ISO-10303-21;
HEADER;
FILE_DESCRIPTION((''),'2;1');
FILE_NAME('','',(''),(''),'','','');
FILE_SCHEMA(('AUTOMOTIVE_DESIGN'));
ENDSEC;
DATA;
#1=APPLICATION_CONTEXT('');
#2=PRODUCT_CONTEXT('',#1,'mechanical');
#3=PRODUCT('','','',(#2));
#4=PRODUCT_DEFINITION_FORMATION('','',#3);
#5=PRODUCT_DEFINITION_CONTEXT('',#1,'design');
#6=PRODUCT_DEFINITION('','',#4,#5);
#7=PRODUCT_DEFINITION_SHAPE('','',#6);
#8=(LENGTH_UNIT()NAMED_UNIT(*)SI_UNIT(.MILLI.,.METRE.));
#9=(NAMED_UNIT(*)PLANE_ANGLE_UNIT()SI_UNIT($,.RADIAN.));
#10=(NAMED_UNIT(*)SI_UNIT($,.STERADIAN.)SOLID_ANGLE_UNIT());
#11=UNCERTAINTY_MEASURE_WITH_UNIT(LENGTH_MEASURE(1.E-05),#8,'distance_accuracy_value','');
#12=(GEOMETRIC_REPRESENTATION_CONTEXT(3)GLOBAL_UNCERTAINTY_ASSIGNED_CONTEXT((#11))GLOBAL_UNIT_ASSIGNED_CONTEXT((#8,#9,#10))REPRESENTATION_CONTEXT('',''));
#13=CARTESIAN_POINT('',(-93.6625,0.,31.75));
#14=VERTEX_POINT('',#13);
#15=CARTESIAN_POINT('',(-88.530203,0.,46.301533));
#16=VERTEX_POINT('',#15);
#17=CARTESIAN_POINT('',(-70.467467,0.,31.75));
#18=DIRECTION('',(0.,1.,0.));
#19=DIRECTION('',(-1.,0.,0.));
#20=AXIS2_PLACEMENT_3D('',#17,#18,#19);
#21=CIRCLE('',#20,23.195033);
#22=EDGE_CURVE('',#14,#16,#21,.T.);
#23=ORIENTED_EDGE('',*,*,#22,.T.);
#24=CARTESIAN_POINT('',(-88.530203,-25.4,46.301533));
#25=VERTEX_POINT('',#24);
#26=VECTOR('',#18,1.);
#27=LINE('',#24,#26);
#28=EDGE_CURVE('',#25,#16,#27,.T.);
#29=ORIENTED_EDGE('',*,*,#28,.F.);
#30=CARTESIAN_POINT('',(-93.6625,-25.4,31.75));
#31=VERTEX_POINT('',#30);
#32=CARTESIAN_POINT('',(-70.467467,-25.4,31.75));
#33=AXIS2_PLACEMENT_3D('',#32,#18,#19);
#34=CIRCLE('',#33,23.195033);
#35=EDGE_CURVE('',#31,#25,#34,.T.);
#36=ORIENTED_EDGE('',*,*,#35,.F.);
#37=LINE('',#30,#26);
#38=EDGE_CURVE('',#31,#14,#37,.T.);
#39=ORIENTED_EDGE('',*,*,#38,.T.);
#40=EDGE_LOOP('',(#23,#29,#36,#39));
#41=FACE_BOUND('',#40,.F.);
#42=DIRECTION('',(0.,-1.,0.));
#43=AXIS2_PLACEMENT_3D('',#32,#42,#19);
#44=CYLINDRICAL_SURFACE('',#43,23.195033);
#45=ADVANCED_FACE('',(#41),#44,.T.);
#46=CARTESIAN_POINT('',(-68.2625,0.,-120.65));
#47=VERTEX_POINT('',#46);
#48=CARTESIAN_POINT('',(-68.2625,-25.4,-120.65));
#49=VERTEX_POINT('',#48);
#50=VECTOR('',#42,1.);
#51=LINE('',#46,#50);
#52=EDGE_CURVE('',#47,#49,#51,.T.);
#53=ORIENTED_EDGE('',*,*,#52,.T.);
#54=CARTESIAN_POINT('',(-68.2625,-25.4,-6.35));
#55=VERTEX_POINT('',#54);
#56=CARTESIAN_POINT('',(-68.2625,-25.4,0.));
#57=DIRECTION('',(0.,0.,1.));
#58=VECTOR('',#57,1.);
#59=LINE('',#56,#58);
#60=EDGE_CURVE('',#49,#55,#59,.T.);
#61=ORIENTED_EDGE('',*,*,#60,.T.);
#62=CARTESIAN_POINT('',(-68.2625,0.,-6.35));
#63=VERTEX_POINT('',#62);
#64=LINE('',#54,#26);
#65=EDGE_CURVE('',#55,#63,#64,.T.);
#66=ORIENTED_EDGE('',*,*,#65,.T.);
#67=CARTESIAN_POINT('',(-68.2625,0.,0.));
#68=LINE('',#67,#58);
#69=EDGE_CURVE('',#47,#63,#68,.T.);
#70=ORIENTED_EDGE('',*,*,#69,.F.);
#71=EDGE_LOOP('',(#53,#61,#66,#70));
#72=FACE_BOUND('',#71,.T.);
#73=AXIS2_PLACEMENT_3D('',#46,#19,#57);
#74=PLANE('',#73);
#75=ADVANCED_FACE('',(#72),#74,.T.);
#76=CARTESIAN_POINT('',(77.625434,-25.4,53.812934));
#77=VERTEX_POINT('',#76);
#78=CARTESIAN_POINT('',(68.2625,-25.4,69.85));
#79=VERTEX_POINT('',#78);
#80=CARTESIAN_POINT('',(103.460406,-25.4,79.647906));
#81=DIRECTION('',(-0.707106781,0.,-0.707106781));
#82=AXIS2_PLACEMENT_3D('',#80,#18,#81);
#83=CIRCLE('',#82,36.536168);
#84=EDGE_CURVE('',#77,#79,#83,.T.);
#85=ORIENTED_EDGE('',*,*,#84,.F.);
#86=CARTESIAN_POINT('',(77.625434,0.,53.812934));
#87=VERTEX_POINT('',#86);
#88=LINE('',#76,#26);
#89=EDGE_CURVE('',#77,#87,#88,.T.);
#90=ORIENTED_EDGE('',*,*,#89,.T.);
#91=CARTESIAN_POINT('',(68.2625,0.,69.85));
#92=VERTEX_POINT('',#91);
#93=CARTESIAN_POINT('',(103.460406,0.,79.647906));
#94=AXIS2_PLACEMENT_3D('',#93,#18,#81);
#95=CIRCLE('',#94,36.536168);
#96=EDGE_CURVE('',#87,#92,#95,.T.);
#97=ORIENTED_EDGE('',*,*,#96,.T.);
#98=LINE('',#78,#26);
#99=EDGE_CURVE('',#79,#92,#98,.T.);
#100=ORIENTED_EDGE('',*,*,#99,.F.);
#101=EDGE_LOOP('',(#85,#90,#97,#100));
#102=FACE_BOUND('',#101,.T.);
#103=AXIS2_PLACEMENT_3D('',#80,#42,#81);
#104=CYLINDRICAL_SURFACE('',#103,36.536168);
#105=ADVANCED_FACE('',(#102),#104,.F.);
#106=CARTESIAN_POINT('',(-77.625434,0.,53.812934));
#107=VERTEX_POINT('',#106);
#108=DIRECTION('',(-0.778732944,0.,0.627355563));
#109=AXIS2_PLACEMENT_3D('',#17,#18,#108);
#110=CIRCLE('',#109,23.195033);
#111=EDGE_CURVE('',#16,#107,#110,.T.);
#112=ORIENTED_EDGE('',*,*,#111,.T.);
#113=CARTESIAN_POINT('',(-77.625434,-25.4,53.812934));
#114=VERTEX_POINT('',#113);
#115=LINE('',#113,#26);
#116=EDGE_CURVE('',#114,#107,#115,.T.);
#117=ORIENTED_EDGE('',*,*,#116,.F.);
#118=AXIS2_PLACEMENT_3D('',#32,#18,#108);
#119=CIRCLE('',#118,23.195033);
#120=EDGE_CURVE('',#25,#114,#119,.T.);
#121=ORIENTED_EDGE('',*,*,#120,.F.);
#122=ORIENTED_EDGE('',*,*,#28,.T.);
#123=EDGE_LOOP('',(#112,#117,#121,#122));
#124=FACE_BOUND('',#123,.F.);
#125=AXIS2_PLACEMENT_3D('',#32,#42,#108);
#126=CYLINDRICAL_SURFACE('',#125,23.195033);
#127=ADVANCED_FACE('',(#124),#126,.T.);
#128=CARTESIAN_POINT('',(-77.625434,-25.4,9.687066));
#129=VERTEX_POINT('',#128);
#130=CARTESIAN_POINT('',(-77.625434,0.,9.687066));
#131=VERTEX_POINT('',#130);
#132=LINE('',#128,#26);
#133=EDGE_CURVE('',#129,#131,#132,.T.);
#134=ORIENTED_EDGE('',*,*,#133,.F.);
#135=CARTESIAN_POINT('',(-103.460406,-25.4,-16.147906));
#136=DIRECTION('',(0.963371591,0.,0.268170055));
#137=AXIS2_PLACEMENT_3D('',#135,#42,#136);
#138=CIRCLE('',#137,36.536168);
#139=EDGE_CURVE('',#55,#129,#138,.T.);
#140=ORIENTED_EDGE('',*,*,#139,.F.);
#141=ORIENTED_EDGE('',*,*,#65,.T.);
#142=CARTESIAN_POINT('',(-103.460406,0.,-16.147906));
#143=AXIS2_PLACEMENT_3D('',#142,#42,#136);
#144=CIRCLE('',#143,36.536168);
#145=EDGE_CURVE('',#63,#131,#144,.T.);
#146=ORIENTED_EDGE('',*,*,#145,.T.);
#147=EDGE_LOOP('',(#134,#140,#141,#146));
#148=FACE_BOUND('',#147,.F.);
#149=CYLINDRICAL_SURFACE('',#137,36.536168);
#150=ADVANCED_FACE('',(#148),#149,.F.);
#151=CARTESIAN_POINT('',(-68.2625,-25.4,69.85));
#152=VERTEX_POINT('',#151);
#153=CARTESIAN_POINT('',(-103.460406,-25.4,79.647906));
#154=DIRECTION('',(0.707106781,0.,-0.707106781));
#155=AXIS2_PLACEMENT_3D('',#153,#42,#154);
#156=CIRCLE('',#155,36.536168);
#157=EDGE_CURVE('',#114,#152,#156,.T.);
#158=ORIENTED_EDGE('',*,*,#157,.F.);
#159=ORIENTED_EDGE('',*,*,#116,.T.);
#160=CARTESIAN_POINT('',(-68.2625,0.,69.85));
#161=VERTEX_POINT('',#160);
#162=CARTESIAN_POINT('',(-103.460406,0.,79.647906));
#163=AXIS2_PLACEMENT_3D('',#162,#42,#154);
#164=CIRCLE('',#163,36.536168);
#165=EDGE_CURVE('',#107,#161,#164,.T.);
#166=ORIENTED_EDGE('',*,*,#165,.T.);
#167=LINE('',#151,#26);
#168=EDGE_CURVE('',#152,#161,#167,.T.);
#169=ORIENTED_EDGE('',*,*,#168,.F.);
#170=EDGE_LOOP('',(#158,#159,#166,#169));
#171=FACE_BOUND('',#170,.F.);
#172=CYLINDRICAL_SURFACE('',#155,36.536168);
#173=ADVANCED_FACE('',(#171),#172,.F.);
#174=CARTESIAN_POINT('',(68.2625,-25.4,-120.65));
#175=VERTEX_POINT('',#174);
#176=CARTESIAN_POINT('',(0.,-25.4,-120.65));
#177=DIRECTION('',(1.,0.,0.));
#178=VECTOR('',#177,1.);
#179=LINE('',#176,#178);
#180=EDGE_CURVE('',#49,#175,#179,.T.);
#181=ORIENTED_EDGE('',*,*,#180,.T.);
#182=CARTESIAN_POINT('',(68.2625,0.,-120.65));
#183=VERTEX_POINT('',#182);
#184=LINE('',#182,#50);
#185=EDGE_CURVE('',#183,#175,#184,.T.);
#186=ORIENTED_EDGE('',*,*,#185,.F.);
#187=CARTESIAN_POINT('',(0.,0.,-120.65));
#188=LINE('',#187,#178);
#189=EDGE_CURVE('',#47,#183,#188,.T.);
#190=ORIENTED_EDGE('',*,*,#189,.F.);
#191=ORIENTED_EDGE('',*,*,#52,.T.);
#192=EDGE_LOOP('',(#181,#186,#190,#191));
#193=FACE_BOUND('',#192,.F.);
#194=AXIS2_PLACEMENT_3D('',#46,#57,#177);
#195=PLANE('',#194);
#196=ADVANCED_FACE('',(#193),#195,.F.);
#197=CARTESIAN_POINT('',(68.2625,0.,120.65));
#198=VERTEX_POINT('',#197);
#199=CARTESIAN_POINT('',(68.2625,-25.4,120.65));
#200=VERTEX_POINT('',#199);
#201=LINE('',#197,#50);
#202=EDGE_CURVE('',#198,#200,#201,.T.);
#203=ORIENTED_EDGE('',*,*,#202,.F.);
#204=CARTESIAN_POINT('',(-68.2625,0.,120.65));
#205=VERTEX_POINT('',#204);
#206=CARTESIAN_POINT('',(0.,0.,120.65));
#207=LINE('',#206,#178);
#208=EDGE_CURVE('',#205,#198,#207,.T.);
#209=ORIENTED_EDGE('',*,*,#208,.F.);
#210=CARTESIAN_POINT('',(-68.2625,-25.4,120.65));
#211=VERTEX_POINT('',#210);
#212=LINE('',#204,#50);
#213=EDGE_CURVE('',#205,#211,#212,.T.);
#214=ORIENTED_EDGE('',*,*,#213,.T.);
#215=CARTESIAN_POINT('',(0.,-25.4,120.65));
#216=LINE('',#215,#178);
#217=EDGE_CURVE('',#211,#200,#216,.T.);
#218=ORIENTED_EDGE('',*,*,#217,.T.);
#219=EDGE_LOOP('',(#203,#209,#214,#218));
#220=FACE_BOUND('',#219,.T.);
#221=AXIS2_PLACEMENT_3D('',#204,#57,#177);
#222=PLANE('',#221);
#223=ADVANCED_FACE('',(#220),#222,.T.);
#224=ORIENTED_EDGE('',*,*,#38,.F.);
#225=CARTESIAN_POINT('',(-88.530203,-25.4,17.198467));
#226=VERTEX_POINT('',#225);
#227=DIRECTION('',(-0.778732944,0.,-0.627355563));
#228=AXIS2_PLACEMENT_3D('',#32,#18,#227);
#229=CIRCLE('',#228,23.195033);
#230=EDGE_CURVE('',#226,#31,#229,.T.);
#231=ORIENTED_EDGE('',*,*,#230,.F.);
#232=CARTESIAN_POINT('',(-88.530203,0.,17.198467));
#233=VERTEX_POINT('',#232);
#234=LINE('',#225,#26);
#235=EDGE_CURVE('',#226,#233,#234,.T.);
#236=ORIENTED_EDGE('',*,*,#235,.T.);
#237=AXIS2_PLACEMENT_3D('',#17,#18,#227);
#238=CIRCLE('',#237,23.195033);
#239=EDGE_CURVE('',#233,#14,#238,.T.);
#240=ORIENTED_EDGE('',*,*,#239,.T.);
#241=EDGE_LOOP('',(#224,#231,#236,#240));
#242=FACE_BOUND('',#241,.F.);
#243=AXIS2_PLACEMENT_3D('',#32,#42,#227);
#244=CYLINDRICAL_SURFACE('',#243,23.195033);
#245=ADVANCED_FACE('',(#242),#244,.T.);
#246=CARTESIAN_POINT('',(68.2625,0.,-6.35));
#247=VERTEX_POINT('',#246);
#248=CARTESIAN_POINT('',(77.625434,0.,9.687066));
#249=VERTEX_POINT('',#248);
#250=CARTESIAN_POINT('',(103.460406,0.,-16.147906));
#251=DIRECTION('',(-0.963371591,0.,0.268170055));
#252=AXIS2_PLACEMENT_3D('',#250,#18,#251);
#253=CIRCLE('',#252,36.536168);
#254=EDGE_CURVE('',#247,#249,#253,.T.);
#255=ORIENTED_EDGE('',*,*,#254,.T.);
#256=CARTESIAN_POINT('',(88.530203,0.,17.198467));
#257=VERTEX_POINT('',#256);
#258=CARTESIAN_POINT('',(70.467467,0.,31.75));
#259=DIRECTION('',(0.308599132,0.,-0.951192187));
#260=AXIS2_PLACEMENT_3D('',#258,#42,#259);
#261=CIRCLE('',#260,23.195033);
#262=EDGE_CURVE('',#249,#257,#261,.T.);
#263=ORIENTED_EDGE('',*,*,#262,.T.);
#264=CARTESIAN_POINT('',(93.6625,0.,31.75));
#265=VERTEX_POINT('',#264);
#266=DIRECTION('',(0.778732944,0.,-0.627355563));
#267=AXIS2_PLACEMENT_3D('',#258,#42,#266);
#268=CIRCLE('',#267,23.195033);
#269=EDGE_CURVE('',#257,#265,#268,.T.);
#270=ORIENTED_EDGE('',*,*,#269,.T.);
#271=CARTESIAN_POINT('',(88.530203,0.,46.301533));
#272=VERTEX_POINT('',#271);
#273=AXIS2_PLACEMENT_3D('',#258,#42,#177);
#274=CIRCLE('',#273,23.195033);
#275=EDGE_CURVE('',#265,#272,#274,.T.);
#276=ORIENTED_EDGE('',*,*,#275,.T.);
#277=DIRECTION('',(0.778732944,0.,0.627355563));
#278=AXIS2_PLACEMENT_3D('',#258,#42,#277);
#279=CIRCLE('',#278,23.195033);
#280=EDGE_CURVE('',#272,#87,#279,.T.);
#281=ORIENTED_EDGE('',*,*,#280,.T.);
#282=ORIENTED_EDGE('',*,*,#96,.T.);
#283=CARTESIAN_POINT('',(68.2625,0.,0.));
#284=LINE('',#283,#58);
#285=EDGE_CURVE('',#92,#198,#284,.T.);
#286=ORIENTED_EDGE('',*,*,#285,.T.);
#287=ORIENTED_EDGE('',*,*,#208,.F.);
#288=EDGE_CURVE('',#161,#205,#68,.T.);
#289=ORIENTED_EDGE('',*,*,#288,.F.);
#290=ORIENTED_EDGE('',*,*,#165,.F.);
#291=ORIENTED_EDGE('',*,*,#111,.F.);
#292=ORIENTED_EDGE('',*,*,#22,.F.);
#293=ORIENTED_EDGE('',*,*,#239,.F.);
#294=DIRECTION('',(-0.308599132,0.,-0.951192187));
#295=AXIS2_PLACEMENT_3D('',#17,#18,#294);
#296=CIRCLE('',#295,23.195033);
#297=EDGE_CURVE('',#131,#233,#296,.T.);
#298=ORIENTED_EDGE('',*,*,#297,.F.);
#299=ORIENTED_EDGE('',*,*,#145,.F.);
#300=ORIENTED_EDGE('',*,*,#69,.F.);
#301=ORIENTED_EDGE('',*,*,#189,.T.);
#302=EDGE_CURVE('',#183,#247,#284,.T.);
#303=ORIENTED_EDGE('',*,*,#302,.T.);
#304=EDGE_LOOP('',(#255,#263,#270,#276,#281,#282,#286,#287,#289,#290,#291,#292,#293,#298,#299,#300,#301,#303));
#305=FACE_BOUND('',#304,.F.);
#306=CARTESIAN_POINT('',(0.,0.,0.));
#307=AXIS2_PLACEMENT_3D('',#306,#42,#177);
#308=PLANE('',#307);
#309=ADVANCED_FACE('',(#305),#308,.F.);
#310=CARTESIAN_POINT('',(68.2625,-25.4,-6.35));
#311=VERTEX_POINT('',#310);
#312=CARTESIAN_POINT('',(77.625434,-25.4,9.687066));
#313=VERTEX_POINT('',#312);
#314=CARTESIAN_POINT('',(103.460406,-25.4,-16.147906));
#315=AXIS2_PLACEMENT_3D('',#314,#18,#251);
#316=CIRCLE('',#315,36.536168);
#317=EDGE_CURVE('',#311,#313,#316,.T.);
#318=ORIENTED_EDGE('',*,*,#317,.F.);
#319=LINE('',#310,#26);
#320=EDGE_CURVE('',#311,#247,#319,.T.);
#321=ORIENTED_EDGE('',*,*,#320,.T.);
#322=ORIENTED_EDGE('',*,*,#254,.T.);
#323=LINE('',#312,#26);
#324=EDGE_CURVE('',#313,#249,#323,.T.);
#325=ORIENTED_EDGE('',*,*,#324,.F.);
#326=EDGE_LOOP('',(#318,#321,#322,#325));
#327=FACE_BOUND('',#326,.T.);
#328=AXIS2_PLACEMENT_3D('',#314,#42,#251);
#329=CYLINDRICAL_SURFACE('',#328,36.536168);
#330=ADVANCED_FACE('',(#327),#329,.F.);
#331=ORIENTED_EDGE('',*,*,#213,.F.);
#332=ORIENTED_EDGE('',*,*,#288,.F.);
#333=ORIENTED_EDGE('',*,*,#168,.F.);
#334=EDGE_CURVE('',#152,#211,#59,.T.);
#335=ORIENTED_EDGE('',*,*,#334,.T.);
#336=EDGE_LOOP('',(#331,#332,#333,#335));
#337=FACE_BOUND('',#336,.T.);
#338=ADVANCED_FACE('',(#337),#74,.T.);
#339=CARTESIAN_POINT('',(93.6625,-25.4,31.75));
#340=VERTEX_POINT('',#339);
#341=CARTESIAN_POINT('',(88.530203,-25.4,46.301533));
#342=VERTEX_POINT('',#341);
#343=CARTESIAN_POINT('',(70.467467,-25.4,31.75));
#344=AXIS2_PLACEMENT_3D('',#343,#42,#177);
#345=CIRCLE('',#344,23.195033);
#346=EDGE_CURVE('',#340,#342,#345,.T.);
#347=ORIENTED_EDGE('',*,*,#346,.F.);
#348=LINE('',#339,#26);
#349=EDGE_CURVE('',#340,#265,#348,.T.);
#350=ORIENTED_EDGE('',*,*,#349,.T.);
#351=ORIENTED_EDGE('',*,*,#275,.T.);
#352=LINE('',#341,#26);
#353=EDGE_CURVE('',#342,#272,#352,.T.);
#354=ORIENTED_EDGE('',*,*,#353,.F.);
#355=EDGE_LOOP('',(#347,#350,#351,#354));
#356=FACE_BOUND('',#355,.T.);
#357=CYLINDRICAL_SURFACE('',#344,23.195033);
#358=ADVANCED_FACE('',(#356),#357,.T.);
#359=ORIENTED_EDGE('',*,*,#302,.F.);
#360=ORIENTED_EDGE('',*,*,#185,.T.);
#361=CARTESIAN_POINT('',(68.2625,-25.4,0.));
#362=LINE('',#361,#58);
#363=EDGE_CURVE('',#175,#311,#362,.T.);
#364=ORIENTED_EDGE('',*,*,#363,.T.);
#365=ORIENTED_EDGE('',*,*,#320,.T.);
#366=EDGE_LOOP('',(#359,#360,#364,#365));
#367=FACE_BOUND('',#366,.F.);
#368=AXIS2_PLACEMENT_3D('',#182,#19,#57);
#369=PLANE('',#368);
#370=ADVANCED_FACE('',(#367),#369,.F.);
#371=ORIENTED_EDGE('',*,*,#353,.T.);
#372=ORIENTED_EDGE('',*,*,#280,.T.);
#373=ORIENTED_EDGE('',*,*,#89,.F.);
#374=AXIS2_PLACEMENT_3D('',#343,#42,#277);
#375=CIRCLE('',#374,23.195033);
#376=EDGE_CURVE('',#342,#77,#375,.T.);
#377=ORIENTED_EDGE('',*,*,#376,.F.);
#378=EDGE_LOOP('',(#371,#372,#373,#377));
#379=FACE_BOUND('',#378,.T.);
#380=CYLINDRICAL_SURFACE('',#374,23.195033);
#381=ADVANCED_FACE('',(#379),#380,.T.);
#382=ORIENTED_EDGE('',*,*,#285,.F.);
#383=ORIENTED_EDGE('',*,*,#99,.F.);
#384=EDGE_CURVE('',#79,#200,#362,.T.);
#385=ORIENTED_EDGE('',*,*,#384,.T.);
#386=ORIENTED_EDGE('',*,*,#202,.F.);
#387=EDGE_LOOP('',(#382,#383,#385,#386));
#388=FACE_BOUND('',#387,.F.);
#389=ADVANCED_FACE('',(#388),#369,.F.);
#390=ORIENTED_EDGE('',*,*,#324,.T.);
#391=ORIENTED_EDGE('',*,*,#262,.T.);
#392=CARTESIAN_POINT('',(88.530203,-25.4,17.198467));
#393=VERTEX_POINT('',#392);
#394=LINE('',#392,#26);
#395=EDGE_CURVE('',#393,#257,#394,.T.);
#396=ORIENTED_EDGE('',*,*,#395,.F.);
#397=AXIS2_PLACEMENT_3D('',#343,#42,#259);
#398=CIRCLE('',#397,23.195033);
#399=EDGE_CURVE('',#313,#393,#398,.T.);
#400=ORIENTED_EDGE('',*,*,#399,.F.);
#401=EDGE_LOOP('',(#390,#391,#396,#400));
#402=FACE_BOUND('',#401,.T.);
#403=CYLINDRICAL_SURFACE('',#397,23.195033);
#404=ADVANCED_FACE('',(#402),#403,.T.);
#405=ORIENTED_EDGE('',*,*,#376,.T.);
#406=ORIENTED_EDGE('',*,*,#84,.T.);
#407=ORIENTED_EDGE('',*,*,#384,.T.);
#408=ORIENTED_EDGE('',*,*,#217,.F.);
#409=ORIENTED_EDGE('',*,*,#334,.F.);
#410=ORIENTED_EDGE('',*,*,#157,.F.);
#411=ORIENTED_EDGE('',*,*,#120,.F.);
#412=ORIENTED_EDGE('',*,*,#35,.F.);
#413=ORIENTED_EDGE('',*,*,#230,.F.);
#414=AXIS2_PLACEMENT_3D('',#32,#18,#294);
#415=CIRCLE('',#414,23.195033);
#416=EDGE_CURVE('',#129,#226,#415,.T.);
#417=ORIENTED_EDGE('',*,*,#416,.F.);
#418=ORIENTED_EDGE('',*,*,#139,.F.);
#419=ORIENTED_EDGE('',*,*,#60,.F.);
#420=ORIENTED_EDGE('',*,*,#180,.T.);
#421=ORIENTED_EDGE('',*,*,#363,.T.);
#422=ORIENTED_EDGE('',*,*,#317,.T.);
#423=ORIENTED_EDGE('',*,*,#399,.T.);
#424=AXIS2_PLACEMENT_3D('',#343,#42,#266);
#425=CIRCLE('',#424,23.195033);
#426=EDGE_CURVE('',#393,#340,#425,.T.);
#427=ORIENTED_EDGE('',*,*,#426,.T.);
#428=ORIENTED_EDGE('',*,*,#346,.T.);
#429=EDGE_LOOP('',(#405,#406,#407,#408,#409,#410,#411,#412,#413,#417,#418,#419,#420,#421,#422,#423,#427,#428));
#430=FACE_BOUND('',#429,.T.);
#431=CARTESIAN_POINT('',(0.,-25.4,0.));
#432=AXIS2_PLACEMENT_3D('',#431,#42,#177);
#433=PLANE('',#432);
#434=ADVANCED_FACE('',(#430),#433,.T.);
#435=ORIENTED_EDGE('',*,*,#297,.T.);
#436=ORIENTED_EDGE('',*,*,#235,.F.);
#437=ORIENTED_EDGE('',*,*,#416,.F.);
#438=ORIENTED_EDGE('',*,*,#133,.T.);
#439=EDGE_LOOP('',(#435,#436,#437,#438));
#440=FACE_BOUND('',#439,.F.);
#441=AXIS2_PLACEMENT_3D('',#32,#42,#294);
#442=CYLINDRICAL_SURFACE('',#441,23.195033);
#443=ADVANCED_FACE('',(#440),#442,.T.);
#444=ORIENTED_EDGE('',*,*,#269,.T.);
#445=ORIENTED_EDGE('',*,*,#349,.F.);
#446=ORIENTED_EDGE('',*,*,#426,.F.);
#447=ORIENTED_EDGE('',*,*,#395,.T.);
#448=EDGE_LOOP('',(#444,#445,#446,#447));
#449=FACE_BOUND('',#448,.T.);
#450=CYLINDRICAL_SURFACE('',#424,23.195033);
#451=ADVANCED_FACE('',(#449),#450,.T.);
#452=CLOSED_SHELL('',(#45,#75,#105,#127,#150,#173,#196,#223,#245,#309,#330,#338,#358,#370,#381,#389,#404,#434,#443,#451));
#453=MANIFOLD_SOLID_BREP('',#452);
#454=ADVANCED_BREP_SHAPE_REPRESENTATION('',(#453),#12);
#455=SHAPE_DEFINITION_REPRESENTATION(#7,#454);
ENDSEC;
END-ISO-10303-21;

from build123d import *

# Parameters (mm, degrees)
F0_W     = 136.525
F0_H     = 241.3
F1_DEPTH = 25.4
F3_DEPTH = 25.4


with BuildPart() as f1:
    # F0 (on Front) → F1 (new body)
    with BuildSketch(Plane.XZ):
        Rectangle(F0_W, F0_H)
    extrude(amount=F1_DEPTH)

    # F2 (on face) → F3 (join)
    with BuildSketch(Plane.XZ.offset(25.4)):
        with BuildLine():
            ThreePointArc((77.6254340957, 53.8129340957), (71.9080698474, 61.2266782869), (68.2625, 69.85))
            Line((68.2625, 69.85), (68.2625, -6.35))
            ThreePointArc((68.2625, -6.35), (71.9080698474, 2.2733217131), (77.6254340957, 9.6870659043))
            ThreePointArc((77.6254340957, 9.6870659043), (82.7346936877, 13.9409024845), (88.5302033496, 17.1984670639))
            ThreePointArc((88.5302033496, 17.1984670639), (92.3418278085, 24.0349565831), (93.6625, 31.75))
            ThreePointArc((93.6625, 31.75), (92.3418278085, 39.4650434169), (88.5302033496, 46.3015329361))
            ThreePointArc((88.5302033496, 46.3015329361), (82.7346936877, 49.5590975155), (77.6254340957, 53.8129340957))
        make_face()
        with BuildLine():
            ThreePointArc((88.5302033496, 46.3015329361), (83.6252121519, 50.8519186766), (77.6254340957, 53.8129340957))
            ThreePointArc((77.6254340957, 53.8129340957), (82.7346936877, 49.5590975155), (88.5302033496, 46.3015329361))
        make_face()
        with BuildLine():
            ThreePointArc((88.5302033496, 17.1984670639), (82.7346936877, 13.9409024845), (77.6254340957, 9.6870659043))
            ThreePointArc((77.6254340957, 9.6870659043), (83.6252121519, 12.6480813234), (88.5302033496, 17.1984670639))
        make_face()
    extrude(amount=-F3_DEPTH)

    # F4: F1 across plane


with BuildPart() as f1_1:
    add(f1.part)
    add(f1.part.mirror(Plane.YZ))


solid = f1_1.part
